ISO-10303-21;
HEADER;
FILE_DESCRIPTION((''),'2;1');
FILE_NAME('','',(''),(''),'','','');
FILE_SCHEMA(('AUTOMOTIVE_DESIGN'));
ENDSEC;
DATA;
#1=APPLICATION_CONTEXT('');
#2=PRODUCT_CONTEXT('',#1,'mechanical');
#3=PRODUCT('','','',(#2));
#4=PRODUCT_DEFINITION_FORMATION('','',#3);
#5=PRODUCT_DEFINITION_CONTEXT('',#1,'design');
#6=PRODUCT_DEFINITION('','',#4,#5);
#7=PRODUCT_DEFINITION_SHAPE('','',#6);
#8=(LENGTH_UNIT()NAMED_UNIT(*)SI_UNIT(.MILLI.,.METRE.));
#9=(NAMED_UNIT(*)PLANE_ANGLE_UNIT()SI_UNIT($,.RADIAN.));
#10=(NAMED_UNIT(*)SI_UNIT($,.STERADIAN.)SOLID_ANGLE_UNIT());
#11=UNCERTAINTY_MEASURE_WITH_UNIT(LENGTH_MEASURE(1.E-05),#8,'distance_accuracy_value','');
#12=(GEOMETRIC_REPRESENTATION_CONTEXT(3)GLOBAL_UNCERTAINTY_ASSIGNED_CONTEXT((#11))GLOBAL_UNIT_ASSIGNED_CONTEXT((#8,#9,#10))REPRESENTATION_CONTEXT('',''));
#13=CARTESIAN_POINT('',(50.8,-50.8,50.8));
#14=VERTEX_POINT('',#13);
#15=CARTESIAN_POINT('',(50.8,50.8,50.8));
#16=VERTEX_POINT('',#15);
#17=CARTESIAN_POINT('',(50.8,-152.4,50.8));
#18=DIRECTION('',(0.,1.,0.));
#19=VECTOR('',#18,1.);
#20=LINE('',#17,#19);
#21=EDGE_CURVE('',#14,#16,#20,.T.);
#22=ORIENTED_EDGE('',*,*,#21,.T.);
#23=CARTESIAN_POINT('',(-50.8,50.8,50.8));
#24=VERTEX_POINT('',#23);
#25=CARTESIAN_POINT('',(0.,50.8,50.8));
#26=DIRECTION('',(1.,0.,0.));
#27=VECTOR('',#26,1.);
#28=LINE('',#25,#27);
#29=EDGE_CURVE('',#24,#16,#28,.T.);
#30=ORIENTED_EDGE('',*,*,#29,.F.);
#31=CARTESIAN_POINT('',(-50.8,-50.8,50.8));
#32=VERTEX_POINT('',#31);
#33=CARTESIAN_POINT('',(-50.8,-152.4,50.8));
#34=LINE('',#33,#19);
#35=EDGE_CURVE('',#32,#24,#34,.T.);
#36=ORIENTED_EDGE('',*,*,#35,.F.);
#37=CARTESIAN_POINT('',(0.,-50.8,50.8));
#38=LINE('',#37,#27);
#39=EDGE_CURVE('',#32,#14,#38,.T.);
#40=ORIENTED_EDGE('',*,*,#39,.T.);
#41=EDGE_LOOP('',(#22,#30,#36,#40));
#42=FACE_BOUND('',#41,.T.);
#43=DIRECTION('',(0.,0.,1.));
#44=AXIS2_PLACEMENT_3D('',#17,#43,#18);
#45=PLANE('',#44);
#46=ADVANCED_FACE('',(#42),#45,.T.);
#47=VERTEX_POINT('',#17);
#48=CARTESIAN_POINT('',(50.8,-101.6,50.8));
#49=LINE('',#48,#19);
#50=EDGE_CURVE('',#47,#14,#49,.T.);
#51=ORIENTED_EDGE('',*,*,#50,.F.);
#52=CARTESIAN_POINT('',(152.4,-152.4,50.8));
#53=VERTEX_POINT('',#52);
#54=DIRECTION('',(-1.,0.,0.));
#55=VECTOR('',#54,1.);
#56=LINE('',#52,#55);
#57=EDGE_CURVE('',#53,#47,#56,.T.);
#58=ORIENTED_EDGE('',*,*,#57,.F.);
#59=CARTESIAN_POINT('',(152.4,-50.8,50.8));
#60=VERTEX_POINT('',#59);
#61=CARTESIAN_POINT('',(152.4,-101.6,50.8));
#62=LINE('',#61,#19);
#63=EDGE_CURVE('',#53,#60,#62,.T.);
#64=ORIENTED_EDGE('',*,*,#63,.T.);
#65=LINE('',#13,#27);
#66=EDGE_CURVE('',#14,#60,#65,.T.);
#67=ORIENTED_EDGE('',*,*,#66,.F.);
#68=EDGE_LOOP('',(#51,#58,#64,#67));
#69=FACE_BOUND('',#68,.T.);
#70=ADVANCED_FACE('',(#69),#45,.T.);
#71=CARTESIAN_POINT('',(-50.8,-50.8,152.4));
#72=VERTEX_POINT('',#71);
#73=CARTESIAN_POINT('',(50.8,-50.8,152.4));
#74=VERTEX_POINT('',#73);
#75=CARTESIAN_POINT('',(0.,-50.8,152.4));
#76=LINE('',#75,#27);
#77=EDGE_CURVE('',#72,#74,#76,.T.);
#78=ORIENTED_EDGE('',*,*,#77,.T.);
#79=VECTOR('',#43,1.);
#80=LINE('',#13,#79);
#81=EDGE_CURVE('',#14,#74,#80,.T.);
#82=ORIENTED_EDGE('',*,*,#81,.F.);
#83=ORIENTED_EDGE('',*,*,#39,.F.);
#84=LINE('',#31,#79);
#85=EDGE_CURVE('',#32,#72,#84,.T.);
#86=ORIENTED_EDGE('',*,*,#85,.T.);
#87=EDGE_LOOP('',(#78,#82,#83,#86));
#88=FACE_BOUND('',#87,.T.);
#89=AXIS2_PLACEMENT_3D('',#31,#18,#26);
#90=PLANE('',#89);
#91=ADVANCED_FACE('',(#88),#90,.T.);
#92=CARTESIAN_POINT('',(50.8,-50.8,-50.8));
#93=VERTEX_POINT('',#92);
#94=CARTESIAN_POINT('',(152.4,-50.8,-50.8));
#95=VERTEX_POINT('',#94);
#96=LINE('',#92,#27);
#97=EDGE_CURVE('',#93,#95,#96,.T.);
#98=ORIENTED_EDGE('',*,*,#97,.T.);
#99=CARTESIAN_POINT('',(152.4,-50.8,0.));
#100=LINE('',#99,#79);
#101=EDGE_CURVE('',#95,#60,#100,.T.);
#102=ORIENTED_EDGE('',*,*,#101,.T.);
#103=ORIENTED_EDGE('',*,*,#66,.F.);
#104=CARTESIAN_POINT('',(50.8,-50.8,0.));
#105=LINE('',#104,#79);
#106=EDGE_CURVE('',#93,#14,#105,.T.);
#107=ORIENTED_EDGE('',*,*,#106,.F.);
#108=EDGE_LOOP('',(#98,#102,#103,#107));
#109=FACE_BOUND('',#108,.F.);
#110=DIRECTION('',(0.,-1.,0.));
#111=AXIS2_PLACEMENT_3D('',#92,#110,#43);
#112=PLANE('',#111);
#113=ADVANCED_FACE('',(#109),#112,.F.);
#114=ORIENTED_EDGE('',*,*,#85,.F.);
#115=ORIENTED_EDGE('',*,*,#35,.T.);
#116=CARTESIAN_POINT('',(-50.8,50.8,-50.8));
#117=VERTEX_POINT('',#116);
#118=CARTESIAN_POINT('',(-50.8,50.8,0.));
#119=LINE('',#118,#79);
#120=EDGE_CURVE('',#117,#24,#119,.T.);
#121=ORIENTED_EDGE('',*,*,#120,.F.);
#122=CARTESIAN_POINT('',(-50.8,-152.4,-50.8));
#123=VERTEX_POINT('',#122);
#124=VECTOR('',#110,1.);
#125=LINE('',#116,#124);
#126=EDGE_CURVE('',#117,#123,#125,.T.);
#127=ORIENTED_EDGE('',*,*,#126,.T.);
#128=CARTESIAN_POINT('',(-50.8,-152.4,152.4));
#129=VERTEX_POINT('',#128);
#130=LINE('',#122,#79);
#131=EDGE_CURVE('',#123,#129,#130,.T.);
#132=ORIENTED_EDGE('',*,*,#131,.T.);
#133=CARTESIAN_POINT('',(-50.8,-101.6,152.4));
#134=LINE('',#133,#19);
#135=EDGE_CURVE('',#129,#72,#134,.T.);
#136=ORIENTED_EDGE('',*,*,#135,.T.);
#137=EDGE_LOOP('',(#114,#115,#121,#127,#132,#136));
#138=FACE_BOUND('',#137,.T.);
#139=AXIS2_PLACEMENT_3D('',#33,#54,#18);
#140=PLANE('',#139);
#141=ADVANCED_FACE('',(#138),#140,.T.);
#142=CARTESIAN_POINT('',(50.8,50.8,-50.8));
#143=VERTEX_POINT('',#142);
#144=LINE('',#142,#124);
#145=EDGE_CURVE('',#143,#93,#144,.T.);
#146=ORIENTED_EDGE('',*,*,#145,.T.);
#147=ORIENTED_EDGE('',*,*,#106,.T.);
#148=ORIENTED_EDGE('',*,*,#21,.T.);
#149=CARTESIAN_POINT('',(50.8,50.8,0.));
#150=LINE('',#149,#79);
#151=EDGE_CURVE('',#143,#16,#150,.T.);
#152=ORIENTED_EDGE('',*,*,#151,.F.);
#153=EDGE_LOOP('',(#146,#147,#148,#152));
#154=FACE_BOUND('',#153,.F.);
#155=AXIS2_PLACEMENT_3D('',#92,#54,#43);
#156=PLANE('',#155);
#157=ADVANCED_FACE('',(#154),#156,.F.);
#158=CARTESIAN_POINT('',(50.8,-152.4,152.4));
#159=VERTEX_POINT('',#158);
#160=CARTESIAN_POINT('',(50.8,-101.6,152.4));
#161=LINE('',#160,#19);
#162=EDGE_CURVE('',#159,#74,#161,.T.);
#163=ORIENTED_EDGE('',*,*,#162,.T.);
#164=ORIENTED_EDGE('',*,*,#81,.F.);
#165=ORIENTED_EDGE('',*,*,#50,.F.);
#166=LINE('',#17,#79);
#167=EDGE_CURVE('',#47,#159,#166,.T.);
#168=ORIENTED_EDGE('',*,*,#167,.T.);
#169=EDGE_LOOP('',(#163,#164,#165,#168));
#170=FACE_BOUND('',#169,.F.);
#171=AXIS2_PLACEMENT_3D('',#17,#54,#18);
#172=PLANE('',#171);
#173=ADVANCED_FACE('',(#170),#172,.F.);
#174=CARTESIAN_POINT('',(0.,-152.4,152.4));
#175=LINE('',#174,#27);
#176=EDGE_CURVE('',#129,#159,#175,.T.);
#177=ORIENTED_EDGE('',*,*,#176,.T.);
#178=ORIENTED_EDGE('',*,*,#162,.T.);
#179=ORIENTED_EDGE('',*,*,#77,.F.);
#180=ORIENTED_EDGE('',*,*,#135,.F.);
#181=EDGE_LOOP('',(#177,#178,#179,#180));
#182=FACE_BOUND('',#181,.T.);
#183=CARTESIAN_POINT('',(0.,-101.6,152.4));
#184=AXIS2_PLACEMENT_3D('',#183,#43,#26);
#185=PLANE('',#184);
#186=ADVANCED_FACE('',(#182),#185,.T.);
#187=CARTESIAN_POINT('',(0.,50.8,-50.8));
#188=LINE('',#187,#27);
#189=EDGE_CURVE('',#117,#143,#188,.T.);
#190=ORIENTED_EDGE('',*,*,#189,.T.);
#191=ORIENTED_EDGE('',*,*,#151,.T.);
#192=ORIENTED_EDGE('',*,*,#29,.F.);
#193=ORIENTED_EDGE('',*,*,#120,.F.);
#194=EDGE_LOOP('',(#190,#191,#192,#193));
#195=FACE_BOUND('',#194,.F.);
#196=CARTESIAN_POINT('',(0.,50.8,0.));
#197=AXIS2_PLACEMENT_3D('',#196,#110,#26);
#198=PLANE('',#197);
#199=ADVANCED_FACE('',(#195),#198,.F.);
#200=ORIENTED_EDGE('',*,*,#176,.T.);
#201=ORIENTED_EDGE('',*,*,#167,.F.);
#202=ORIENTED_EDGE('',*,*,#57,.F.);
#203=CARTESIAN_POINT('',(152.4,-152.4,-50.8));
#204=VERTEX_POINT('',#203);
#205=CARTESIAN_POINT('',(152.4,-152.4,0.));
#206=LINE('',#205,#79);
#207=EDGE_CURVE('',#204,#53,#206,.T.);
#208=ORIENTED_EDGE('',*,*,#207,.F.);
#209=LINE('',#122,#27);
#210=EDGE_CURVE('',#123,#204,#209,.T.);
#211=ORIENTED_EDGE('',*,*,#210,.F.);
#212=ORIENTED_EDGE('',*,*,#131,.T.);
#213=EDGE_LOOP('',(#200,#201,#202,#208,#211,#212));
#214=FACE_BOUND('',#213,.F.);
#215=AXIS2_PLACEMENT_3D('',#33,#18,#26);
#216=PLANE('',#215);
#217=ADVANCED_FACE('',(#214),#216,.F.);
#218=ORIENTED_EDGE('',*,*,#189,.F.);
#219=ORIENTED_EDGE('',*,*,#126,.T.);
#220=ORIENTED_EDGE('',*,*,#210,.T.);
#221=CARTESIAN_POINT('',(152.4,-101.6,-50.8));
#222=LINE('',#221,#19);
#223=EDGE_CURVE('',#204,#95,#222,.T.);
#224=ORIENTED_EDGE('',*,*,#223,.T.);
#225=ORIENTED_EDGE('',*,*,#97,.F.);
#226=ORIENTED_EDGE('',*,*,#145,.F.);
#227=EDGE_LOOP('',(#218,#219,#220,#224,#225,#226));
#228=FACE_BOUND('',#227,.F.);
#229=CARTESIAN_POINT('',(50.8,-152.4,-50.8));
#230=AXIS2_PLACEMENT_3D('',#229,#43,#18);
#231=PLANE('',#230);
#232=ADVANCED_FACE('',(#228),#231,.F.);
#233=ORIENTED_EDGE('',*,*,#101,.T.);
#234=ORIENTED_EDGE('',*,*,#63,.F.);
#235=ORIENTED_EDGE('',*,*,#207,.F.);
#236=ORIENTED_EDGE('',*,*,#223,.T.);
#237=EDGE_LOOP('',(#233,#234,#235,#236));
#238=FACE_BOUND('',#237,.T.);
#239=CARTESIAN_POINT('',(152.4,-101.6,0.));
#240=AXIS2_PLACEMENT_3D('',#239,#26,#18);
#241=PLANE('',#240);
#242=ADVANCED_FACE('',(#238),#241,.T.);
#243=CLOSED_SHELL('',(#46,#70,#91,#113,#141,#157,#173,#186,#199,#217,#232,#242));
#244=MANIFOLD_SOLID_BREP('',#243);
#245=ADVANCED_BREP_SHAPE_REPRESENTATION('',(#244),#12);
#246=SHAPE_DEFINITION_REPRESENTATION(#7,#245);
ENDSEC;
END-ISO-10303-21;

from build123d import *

# Parameters (mm, degrees)
F1_W     = 101.6
F1_H     = 101.6
F2_DEPTH = 50.8
F3_W     = 101.6
F3_H     = 101.6
F4_DEPTH = 101.6
F5_W     = 101.6
F5_H     = 101.6
F6_DEPTH = 101.6
F7_W     = 101.6
F7_H     = 101.6
F8_DEPTH = 101.6


# Not quite as in the source:
# - a variable given as a bare number and used for a length is read in inches; the dataset says mm whatever the document's units were


with BuildPart() as f2:
    # F1 (on Front) → F2 (new body, symmetric)
    with BuildSketch(Plane.XZ):
        Rectangle(F1_W, F1_H)
    extrude(amount=F2_DEPTH, both=True)

    # F3 (on face) → F4 (join)
    with BuildSketch(Plane.XZ.offset(50.8)):
        Rectangle(F3_W, F3_H)
    extrude(amount=F4_DEPTH)

    # F5 (on face) → F6 (join)
    with BuildSketch(Plane.YZ.offset(50.8)):
        with Locations((-101.6, 0)):
            Rectangle(F5_W, F5_H)
    extrude(amount=F6_DEPTH)

    # F7 (on face) → F8 (join)
    with BuildSketch(Plane.XY.offset(50.8)):
        with Locations((0, -101.6)):
            Rectangle(F7_W, F7_H)
    extrude(amount=F8_DEPTH)


solid = f2.part
